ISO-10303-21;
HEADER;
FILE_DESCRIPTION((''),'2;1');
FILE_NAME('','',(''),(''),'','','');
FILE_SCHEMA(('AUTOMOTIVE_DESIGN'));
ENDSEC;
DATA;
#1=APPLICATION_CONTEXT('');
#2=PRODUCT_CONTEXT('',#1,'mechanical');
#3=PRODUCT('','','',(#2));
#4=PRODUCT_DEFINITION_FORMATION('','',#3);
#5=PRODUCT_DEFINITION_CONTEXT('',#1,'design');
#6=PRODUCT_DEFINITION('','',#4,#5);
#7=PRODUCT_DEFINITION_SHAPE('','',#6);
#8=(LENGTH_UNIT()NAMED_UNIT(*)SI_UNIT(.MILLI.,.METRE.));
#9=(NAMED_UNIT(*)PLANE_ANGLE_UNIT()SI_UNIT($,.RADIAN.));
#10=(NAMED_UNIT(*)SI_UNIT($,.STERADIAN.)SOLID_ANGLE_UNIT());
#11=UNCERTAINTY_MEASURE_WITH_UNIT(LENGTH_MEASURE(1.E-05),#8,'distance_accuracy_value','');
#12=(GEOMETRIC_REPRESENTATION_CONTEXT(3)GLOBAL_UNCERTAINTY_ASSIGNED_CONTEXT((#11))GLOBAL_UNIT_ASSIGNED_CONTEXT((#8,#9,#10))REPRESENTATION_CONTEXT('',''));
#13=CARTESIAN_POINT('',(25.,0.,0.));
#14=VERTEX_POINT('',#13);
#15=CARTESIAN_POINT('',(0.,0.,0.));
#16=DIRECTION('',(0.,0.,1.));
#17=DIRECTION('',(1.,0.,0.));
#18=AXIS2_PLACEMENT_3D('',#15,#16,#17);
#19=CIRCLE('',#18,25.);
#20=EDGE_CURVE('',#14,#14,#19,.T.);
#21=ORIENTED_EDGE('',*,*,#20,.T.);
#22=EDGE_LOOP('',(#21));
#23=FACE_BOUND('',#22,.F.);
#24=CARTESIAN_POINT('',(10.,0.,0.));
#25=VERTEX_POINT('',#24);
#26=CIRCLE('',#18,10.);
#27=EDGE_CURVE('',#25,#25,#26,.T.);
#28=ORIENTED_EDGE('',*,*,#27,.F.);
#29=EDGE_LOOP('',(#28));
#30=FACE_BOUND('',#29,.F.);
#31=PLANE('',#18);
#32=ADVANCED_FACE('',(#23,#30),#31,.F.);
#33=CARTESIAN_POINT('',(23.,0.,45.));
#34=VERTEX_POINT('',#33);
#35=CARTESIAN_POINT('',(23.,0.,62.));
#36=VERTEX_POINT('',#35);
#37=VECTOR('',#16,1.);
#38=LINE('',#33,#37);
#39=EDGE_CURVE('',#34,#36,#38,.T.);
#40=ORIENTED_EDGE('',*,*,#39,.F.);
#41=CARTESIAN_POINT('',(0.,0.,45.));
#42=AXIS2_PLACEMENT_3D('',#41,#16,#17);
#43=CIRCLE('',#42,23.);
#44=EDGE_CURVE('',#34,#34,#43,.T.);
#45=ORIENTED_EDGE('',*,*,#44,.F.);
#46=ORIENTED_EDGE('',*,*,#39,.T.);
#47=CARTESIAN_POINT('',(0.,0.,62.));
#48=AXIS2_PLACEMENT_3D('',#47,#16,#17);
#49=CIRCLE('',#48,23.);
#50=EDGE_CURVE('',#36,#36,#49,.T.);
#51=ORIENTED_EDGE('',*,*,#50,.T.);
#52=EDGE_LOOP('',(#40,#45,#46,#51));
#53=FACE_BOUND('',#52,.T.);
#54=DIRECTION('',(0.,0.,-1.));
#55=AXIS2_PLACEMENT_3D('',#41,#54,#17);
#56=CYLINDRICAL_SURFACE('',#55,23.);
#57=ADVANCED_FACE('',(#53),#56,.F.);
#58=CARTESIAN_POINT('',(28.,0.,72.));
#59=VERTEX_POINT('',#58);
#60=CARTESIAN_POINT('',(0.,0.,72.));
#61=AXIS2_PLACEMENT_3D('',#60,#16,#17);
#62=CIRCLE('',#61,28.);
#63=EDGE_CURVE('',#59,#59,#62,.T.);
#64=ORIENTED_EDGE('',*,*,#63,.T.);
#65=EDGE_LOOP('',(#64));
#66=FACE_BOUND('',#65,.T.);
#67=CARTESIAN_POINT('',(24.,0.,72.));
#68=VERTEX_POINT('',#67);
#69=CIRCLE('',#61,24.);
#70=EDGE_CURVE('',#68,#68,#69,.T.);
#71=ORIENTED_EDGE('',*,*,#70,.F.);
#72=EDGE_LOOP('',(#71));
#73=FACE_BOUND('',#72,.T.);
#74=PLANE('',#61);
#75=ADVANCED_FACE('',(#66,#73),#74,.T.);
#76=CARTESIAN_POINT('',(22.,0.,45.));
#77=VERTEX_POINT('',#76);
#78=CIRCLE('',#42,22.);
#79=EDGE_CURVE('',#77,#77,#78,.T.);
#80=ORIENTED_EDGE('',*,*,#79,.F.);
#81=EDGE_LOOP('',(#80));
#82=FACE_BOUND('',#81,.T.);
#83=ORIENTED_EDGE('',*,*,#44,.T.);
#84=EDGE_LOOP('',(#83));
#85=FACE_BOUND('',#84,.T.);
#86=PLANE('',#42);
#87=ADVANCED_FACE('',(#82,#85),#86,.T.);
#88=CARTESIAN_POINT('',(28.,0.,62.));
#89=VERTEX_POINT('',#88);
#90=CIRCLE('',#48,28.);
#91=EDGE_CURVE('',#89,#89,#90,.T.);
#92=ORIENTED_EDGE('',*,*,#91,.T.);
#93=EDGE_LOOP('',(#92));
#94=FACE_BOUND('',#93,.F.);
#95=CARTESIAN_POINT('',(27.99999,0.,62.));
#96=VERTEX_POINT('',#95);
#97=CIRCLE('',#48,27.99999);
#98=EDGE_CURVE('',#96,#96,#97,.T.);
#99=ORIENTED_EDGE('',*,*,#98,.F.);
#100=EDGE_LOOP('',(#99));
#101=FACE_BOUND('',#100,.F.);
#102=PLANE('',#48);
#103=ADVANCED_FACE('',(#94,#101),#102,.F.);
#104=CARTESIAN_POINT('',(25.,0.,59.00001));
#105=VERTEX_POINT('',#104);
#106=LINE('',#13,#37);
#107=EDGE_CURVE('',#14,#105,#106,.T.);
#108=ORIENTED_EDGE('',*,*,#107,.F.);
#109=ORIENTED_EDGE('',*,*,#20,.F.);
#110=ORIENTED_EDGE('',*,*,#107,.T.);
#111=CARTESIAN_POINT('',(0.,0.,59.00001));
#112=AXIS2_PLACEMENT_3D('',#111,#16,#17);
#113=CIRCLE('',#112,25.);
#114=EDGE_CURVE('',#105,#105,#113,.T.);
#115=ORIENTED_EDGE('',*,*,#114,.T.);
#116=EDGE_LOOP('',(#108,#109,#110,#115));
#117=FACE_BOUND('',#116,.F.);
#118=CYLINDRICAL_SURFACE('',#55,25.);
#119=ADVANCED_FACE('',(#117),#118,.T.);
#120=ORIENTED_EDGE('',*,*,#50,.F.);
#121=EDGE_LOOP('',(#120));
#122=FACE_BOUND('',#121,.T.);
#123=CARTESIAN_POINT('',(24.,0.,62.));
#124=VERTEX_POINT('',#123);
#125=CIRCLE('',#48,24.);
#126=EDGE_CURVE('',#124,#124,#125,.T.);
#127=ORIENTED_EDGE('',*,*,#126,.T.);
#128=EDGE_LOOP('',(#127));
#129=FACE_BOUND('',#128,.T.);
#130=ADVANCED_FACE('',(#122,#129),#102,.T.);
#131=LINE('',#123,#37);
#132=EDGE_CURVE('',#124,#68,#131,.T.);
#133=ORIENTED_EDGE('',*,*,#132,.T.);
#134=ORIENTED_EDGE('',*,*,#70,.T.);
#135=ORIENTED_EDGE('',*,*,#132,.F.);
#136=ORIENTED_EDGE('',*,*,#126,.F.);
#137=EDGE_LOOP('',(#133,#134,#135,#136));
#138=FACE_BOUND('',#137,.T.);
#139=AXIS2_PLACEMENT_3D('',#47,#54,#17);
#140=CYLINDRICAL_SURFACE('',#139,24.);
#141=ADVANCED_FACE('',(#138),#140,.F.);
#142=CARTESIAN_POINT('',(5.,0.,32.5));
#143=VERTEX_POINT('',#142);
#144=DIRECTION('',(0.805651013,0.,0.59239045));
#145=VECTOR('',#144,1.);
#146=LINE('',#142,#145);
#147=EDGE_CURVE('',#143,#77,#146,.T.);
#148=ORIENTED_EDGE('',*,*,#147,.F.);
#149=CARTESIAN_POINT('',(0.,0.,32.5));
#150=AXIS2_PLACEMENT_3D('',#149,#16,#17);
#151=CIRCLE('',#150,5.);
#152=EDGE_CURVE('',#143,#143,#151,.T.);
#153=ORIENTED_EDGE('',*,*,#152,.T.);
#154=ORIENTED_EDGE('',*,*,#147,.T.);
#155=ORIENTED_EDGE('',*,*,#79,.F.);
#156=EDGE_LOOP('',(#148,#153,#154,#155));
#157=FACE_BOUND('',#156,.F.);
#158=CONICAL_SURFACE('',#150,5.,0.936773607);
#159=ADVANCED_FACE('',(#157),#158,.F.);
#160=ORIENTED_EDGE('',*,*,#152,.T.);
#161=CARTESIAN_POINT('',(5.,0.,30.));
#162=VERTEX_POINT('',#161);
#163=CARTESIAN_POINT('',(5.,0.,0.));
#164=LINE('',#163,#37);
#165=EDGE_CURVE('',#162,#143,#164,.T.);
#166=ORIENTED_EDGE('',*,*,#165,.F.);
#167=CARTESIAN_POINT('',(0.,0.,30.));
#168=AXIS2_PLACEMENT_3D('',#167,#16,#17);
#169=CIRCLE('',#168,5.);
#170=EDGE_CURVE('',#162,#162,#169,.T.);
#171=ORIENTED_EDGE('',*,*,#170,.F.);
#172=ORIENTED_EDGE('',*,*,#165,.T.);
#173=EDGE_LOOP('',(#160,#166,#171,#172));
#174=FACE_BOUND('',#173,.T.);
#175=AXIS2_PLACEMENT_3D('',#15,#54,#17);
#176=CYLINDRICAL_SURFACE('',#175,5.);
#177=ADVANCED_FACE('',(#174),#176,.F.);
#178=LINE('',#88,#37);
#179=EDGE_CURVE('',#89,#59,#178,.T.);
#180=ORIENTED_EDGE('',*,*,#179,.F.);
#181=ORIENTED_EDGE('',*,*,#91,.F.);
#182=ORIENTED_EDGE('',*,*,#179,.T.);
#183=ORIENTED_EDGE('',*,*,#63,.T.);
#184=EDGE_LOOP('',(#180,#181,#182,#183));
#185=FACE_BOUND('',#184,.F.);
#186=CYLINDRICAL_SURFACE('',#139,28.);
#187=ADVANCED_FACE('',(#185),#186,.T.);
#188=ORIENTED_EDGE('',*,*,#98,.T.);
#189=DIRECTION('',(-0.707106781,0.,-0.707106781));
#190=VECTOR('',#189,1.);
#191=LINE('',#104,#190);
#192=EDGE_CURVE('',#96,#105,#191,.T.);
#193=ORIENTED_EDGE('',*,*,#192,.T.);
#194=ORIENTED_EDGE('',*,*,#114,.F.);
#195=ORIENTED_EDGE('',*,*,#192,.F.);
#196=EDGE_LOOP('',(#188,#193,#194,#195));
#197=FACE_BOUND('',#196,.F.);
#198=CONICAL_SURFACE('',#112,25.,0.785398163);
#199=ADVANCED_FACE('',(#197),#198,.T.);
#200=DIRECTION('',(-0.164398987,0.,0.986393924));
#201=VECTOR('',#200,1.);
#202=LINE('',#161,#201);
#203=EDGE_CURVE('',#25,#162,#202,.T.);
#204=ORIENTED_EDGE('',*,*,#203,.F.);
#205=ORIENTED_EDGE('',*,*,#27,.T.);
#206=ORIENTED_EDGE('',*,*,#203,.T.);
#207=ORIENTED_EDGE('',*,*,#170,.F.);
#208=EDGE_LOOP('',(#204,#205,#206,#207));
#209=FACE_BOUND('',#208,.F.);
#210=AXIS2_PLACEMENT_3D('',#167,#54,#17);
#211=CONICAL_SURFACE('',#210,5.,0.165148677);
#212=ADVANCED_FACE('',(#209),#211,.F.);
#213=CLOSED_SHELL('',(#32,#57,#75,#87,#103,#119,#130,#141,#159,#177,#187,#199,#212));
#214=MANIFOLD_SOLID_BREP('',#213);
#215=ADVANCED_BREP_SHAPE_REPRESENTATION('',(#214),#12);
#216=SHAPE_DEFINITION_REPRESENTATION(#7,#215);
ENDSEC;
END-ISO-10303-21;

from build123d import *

# Parameters (mm, degrees)
F0_R     = 25
F0_R_2   = 5
F1_DEPTH = 45
F2_SIZE2 = 17
F2_SIZE  = 12.5
F3_R     = 25
F3_R_2   = 23
F4_DEPTH = 17
F5_R     = 28
F5_R_2   = 25
F5_R_3   = 24
F6_DEPTH = 10
F7_SIZE  = 2.99999
F8_SIZE2 = 30
F8_SIZE  = 5


# Not quite as in the source:
# - a fillet or chamfer is up to 0.001 mm smaller than in the source, because OpenCascade refuses the exact size


with BuildPart() as f1:
    # F0 (on Top) → F1 (new body)
    with BuildSketch(Plane.XY):
        Circle(F0_R)
        Circle(F0_R_2, mode=Mode.SUBTRACT)
    extrude(amount=F1_DEPTH)

    # F2
    f2_edges = [f1.edges().sort_by_distance(p)[0] for p in [
        (-5, 0, 45),
    ]]
    f2_side = f1.faces().sort_by_distance((-5, 0, 22.5))[0]
    chamfer(f2_edges, length=F2_SIZE, length2=F2_SIZE2, reference=f2_side)

    # F3 (on face) → F4 (join)
    with BuildSketch(Plane.XY.offset(45)):
        Circle(F3_R)
        Circle(F3_R_2, mode=Mode.SUBTRACT)
    extrude(amount=F4_DEPTH)

    # F5 (on face) → F6 (join)
    with BuildSketch(Plane.XY.offset(62)):
        Circle(F5_R)
        Circle(F5_R_2, mode=Mode.SUBTRACT)
        Circle(F5_R_2)
        Circle(F5_R_3, mode=Mode.SUBTRACT)
    extrude(amount=F6_DEPTH)

    # F7 (size 3 in the source; OpenCascade refuses exactly that, so slightly less here)
    f7_edges = [f1.edges().sort_by_distance(p)[0] for p in [
        (-25, 0, 62),
    ]]
    chamfer(f7_edges, length=F7_SIZE)

    # F8
    f8_edges = [f1.edges().sort_by_distance(p)[0] for p in [
        (-5, 0, 0),
    ]]
    f8_side = f1.faces().sort_by_distance((-24.292893, 0, 0))[0]
    chamfer(f8_edges, length=F8_SIZE, length2=F8_SIZE2, reference=f8_side)


solid = f1.part
